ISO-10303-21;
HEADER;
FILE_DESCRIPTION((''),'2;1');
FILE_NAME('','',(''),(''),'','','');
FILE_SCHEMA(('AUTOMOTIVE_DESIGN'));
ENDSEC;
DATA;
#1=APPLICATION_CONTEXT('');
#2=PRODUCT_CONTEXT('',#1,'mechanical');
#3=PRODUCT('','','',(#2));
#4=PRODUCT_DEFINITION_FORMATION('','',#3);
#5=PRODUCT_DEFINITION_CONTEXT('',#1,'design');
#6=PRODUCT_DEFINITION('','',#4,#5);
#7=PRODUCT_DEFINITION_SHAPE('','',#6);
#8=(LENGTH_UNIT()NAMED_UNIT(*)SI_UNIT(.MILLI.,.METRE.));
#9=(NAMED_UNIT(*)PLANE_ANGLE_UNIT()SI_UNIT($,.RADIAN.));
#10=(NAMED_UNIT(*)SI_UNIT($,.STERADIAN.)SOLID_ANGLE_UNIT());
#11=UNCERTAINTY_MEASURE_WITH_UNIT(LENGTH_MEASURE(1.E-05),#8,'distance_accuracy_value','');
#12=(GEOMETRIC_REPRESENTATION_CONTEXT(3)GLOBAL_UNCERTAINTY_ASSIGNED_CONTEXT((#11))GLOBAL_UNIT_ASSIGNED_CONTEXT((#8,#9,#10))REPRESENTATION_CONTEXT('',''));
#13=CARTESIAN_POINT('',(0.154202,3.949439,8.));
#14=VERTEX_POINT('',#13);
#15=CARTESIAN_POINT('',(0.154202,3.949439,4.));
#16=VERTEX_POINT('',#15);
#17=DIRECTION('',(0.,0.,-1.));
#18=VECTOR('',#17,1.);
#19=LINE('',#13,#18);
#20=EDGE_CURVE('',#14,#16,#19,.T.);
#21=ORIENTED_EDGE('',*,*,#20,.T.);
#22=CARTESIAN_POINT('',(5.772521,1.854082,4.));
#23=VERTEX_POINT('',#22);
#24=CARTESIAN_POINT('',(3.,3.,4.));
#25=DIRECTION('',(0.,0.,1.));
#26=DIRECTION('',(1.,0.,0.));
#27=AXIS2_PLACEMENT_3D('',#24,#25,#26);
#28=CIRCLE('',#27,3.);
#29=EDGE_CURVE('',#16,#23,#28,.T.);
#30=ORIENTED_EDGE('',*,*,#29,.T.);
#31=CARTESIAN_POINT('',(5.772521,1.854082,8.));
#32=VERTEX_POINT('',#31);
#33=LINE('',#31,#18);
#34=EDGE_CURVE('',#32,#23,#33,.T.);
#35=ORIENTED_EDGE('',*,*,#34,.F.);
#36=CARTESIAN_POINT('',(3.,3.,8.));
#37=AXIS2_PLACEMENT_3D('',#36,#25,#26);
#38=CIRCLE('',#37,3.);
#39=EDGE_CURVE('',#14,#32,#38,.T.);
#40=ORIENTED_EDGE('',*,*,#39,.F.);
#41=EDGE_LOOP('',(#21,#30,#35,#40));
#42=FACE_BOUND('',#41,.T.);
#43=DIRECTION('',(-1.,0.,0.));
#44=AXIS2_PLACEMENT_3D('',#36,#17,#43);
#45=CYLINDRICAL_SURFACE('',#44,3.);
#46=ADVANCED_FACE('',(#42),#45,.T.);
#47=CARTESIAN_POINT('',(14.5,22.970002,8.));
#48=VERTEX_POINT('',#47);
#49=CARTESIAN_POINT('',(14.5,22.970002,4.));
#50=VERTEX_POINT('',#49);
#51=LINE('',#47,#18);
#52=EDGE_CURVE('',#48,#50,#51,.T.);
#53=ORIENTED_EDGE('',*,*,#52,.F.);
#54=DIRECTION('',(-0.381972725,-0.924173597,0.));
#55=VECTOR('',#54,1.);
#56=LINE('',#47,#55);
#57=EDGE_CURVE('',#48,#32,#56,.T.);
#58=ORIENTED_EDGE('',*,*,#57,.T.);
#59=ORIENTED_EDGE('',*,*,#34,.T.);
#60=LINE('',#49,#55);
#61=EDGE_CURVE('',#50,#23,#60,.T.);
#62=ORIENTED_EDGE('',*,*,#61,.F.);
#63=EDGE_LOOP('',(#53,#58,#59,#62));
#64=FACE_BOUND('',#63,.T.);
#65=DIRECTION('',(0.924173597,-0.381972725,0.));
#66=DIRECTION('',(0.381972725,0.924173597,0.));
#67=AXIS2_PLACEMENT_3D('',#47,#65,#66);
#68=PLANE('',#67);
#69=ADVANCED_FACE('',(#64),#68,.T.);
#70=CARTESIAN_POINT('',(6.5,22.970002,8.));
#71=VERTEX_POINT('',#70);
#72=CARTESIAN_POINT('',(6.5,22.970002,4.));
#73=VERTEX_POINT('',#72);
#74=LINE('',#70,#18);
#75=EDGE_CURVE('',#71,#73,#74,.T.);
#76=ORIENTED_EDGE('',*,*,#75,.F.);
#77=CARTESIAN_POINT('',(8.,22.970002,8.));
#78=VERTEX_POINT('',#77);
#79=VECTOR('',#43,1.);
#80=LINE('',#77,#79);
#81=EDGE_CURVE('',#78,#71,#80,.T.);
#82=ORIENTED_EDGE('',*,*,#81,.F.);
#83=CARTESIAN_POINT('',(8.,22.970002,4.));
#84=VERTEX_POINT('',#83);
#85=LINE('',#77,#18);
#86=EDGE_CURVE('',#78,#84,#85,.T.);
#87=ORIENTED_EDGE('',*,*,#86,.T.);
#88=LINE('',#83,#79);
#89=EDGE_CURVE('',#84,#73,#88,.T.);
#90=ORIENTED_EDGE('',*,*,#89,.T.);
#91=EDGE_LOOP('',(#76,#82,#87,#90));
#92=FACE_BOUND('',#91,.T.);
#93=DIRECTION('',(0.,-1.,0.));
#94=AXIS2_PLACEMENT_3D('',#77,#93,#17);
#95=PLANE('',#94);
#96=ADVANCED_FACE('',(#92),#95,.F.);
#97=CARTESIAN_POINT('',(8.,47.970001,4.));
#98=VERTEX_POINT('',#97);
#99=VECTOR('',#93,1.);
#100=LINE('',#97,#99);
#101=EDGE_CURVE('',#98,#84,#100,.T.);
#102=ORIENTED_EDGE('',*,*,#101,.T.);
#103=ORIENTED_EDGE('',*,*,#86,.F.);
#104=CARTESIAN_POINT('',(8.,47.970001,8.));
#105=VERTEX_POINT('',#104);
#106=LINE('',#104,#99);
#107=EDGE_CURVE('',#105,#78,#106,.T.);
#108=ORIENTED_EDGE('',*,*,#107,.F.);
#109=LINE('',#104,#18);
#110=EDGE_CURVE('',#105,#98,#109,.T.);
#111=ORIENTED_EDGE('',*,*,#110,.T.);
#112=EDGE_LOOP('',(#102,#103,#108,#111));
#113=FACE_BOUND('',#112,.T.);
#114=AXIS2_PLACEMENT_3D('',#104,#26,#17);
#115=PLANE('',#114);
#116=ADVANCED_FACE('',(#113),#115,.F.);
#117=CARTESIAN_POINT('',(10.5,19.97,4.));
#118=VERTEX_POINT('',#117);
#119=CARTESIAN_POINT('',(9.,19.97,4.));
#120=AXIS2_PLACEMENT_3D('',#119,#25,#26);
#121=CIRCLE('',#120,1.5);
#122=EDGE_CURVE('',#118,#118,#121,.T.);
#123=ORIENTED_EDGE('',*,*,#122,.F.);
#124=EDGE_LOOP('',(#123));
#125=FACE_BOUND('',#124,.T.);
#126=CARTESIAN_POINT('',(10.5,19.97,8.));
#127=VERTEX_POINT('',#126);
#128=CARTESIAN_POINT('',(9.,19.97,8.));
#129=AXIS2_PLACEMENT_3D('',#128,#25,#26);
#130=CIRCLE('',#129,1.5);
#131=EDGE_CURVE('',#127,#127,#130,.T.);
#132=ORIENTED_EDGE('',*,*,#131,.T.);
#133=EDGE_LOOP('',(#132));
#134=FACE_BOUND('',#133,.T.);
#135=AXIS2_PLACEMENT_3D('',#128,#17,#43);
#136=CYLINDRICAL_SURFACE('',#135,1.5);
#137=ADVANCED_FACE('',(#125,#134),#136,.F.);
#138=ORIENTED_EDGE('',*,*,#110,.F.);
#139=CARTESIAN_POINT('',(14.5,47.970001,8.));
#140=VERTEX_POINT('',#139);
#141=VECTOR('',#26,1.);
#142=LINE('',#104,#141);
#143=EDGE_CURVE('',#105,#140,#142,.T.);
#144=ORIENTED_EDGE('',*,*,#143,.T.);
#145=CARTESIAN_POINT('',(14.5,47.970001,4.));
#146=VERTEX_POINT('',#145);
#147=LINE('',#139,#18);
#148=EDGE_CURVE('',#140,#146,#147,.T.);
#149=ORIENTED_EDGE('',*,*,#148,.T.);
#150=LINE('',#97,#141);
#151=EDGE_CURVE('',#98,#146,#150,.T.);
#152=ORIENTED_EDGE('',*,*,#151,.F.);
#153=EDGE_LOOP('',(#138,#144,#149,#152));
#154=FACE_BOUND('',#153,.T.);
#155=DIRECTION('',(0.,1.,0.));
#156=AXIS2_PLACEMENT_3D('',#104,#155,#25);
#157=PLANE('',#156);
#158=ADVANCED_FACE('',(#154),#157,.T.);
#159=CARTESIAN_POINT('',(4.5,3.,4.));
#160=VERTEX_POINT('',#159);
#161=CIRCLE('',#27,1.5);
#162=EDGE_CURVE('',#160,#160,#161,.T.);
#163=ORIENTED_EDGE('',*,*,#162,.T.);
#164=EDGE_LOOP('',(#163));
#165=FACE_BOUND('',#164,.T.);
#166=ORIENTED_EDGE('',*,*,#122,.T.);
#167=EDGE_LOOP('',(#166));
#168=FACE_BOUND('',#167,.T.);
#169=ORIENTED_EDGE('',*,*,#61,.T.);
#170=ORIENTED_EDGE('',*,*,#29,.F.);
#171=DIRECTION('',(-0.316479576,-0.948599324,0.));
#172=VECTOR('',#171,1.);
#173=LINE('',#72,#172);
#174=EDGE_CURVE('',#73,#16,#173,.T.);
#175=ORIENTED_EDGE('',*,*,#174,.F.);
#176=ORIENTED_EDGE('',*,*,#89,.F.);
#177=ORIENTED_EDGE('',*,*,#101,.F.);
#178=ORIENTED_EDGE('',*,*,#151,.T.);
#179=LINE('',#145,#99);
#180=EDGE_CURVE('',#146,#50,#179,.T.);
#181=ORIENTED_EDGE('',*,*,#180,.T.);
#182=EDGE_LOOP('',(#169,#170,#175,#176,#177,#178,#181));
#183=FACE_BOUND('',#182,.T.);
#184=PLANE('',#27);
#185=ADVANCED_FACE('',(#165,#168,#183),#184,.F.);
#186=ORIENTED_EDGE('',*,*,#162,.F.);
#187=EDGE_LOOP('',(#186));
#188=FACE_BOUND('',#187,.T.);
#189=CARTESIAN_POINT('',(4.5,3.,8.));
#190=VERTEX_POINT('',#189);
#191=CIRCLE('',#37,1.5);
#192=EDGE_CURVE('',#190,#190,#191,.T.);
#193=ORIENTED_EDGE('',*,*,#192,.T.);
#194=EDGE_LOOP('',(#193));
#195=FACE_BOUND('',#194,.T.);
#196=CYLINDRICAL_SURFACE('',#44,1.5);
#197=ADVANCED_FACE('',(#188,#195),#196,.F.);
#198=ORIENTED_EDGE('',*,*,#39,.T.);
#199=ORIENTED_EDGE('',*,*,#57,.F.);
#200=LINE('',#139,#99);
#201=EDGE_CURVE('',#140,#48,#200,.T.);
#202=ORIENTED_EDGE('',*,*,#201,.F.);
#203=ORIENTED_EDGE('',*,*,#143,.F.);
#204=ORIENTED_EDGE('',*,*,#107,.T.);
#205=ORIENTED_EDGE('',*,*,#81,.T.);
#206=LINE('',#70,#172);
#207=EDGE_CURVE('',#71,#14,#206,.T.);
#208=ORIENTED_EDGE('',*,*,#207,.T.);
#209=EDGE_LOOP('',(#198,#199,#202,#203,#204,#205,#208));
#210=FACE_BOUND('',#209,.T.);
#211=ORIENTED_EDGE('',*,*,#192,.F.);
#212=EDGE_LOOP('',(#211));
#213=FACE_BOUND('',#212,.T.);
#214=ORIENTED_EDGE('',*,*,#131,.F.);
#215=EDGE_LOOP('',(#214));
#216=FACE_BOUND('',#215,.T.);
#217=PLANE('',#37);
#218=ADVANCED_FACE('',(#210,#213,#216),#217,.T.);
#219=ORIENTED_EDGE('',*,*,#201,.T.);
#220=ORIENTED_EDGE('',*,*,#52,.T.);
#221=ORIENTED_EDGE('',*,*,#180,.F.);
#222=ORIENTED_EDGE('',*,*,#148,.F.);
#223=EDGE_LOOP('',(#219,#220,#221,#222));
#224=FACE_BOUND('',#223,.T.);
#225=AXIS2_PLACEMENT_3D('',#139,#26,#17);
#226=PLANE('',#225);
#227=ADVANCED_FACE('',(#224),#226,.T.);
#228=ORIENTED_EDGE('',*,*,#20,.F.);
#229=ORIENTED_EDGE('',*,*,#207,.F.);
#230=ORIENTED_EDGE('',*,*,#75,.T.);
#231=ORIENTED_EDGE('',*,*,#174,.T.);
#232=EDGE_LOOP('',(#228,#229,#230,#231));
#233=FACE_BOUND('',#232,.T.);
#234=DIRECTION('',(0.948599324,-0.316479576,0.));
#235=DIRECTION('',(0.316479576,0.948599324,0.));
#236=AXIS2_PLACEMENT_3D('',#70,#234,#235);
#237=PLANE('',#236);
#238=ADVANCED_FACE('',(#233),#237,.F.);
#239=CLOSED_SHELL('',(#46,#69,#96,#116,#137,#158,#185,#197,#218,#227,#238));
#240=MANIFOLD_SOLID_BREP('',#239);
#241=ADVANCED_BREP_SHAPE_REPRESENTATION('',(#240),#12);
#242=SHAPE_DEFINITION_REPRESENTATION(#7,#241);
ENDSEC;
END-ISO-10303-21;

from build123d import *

# Parameters (mm, degrees)
SKETCH1_R           = 1.499999946
SKETCH1_R_2         = 1.500000009
BOSS_EXTRUDE2_DEPTH = 4


# Read off the part's stored shape, not the designer's step: Imported1
with BuildPart() as part:
    # Sketch1 → Boss-Extrude2 (new body)
    with BuildSketch(Plane.XY.offset(4.00000019)):
        with BuildLine():
            Line((8.00000038, 47.970000654), (14.499999583, 47.970000654))
            Line((14.499999583, 47.970000654), (14.499999583, 22.970002145))
            Line((14.499999583, 22.970002145), (5.772520595, 1.854081769))
            ThreePointArc((5.772520595, 1.854081769), (1.951680977, 0.189123339), (0.154201944, 3.949438629))
            Line((0.154201944, 3.949438629), (6.500000134, 22.970002145))
            Line((6.500000134, 22.970002145), (8.00000038, 22.970002145))
            Line((8.00000038, 22.970002145), (8.00000038, 47.970000654))
        make_face()
        with Locations((9.000000172, 19.969999637)):
            Circle(SKETCH1_R, mode=Mode.SUBTRACT)
        with Locations((3.000000037, 2.99999995)):
            Circle(SKETCH1_R_2, mode=Mode.SUBTRACT)
    extrude(amount=BOSS_EXTRUDE2_DEPTH)


solid = part.part
